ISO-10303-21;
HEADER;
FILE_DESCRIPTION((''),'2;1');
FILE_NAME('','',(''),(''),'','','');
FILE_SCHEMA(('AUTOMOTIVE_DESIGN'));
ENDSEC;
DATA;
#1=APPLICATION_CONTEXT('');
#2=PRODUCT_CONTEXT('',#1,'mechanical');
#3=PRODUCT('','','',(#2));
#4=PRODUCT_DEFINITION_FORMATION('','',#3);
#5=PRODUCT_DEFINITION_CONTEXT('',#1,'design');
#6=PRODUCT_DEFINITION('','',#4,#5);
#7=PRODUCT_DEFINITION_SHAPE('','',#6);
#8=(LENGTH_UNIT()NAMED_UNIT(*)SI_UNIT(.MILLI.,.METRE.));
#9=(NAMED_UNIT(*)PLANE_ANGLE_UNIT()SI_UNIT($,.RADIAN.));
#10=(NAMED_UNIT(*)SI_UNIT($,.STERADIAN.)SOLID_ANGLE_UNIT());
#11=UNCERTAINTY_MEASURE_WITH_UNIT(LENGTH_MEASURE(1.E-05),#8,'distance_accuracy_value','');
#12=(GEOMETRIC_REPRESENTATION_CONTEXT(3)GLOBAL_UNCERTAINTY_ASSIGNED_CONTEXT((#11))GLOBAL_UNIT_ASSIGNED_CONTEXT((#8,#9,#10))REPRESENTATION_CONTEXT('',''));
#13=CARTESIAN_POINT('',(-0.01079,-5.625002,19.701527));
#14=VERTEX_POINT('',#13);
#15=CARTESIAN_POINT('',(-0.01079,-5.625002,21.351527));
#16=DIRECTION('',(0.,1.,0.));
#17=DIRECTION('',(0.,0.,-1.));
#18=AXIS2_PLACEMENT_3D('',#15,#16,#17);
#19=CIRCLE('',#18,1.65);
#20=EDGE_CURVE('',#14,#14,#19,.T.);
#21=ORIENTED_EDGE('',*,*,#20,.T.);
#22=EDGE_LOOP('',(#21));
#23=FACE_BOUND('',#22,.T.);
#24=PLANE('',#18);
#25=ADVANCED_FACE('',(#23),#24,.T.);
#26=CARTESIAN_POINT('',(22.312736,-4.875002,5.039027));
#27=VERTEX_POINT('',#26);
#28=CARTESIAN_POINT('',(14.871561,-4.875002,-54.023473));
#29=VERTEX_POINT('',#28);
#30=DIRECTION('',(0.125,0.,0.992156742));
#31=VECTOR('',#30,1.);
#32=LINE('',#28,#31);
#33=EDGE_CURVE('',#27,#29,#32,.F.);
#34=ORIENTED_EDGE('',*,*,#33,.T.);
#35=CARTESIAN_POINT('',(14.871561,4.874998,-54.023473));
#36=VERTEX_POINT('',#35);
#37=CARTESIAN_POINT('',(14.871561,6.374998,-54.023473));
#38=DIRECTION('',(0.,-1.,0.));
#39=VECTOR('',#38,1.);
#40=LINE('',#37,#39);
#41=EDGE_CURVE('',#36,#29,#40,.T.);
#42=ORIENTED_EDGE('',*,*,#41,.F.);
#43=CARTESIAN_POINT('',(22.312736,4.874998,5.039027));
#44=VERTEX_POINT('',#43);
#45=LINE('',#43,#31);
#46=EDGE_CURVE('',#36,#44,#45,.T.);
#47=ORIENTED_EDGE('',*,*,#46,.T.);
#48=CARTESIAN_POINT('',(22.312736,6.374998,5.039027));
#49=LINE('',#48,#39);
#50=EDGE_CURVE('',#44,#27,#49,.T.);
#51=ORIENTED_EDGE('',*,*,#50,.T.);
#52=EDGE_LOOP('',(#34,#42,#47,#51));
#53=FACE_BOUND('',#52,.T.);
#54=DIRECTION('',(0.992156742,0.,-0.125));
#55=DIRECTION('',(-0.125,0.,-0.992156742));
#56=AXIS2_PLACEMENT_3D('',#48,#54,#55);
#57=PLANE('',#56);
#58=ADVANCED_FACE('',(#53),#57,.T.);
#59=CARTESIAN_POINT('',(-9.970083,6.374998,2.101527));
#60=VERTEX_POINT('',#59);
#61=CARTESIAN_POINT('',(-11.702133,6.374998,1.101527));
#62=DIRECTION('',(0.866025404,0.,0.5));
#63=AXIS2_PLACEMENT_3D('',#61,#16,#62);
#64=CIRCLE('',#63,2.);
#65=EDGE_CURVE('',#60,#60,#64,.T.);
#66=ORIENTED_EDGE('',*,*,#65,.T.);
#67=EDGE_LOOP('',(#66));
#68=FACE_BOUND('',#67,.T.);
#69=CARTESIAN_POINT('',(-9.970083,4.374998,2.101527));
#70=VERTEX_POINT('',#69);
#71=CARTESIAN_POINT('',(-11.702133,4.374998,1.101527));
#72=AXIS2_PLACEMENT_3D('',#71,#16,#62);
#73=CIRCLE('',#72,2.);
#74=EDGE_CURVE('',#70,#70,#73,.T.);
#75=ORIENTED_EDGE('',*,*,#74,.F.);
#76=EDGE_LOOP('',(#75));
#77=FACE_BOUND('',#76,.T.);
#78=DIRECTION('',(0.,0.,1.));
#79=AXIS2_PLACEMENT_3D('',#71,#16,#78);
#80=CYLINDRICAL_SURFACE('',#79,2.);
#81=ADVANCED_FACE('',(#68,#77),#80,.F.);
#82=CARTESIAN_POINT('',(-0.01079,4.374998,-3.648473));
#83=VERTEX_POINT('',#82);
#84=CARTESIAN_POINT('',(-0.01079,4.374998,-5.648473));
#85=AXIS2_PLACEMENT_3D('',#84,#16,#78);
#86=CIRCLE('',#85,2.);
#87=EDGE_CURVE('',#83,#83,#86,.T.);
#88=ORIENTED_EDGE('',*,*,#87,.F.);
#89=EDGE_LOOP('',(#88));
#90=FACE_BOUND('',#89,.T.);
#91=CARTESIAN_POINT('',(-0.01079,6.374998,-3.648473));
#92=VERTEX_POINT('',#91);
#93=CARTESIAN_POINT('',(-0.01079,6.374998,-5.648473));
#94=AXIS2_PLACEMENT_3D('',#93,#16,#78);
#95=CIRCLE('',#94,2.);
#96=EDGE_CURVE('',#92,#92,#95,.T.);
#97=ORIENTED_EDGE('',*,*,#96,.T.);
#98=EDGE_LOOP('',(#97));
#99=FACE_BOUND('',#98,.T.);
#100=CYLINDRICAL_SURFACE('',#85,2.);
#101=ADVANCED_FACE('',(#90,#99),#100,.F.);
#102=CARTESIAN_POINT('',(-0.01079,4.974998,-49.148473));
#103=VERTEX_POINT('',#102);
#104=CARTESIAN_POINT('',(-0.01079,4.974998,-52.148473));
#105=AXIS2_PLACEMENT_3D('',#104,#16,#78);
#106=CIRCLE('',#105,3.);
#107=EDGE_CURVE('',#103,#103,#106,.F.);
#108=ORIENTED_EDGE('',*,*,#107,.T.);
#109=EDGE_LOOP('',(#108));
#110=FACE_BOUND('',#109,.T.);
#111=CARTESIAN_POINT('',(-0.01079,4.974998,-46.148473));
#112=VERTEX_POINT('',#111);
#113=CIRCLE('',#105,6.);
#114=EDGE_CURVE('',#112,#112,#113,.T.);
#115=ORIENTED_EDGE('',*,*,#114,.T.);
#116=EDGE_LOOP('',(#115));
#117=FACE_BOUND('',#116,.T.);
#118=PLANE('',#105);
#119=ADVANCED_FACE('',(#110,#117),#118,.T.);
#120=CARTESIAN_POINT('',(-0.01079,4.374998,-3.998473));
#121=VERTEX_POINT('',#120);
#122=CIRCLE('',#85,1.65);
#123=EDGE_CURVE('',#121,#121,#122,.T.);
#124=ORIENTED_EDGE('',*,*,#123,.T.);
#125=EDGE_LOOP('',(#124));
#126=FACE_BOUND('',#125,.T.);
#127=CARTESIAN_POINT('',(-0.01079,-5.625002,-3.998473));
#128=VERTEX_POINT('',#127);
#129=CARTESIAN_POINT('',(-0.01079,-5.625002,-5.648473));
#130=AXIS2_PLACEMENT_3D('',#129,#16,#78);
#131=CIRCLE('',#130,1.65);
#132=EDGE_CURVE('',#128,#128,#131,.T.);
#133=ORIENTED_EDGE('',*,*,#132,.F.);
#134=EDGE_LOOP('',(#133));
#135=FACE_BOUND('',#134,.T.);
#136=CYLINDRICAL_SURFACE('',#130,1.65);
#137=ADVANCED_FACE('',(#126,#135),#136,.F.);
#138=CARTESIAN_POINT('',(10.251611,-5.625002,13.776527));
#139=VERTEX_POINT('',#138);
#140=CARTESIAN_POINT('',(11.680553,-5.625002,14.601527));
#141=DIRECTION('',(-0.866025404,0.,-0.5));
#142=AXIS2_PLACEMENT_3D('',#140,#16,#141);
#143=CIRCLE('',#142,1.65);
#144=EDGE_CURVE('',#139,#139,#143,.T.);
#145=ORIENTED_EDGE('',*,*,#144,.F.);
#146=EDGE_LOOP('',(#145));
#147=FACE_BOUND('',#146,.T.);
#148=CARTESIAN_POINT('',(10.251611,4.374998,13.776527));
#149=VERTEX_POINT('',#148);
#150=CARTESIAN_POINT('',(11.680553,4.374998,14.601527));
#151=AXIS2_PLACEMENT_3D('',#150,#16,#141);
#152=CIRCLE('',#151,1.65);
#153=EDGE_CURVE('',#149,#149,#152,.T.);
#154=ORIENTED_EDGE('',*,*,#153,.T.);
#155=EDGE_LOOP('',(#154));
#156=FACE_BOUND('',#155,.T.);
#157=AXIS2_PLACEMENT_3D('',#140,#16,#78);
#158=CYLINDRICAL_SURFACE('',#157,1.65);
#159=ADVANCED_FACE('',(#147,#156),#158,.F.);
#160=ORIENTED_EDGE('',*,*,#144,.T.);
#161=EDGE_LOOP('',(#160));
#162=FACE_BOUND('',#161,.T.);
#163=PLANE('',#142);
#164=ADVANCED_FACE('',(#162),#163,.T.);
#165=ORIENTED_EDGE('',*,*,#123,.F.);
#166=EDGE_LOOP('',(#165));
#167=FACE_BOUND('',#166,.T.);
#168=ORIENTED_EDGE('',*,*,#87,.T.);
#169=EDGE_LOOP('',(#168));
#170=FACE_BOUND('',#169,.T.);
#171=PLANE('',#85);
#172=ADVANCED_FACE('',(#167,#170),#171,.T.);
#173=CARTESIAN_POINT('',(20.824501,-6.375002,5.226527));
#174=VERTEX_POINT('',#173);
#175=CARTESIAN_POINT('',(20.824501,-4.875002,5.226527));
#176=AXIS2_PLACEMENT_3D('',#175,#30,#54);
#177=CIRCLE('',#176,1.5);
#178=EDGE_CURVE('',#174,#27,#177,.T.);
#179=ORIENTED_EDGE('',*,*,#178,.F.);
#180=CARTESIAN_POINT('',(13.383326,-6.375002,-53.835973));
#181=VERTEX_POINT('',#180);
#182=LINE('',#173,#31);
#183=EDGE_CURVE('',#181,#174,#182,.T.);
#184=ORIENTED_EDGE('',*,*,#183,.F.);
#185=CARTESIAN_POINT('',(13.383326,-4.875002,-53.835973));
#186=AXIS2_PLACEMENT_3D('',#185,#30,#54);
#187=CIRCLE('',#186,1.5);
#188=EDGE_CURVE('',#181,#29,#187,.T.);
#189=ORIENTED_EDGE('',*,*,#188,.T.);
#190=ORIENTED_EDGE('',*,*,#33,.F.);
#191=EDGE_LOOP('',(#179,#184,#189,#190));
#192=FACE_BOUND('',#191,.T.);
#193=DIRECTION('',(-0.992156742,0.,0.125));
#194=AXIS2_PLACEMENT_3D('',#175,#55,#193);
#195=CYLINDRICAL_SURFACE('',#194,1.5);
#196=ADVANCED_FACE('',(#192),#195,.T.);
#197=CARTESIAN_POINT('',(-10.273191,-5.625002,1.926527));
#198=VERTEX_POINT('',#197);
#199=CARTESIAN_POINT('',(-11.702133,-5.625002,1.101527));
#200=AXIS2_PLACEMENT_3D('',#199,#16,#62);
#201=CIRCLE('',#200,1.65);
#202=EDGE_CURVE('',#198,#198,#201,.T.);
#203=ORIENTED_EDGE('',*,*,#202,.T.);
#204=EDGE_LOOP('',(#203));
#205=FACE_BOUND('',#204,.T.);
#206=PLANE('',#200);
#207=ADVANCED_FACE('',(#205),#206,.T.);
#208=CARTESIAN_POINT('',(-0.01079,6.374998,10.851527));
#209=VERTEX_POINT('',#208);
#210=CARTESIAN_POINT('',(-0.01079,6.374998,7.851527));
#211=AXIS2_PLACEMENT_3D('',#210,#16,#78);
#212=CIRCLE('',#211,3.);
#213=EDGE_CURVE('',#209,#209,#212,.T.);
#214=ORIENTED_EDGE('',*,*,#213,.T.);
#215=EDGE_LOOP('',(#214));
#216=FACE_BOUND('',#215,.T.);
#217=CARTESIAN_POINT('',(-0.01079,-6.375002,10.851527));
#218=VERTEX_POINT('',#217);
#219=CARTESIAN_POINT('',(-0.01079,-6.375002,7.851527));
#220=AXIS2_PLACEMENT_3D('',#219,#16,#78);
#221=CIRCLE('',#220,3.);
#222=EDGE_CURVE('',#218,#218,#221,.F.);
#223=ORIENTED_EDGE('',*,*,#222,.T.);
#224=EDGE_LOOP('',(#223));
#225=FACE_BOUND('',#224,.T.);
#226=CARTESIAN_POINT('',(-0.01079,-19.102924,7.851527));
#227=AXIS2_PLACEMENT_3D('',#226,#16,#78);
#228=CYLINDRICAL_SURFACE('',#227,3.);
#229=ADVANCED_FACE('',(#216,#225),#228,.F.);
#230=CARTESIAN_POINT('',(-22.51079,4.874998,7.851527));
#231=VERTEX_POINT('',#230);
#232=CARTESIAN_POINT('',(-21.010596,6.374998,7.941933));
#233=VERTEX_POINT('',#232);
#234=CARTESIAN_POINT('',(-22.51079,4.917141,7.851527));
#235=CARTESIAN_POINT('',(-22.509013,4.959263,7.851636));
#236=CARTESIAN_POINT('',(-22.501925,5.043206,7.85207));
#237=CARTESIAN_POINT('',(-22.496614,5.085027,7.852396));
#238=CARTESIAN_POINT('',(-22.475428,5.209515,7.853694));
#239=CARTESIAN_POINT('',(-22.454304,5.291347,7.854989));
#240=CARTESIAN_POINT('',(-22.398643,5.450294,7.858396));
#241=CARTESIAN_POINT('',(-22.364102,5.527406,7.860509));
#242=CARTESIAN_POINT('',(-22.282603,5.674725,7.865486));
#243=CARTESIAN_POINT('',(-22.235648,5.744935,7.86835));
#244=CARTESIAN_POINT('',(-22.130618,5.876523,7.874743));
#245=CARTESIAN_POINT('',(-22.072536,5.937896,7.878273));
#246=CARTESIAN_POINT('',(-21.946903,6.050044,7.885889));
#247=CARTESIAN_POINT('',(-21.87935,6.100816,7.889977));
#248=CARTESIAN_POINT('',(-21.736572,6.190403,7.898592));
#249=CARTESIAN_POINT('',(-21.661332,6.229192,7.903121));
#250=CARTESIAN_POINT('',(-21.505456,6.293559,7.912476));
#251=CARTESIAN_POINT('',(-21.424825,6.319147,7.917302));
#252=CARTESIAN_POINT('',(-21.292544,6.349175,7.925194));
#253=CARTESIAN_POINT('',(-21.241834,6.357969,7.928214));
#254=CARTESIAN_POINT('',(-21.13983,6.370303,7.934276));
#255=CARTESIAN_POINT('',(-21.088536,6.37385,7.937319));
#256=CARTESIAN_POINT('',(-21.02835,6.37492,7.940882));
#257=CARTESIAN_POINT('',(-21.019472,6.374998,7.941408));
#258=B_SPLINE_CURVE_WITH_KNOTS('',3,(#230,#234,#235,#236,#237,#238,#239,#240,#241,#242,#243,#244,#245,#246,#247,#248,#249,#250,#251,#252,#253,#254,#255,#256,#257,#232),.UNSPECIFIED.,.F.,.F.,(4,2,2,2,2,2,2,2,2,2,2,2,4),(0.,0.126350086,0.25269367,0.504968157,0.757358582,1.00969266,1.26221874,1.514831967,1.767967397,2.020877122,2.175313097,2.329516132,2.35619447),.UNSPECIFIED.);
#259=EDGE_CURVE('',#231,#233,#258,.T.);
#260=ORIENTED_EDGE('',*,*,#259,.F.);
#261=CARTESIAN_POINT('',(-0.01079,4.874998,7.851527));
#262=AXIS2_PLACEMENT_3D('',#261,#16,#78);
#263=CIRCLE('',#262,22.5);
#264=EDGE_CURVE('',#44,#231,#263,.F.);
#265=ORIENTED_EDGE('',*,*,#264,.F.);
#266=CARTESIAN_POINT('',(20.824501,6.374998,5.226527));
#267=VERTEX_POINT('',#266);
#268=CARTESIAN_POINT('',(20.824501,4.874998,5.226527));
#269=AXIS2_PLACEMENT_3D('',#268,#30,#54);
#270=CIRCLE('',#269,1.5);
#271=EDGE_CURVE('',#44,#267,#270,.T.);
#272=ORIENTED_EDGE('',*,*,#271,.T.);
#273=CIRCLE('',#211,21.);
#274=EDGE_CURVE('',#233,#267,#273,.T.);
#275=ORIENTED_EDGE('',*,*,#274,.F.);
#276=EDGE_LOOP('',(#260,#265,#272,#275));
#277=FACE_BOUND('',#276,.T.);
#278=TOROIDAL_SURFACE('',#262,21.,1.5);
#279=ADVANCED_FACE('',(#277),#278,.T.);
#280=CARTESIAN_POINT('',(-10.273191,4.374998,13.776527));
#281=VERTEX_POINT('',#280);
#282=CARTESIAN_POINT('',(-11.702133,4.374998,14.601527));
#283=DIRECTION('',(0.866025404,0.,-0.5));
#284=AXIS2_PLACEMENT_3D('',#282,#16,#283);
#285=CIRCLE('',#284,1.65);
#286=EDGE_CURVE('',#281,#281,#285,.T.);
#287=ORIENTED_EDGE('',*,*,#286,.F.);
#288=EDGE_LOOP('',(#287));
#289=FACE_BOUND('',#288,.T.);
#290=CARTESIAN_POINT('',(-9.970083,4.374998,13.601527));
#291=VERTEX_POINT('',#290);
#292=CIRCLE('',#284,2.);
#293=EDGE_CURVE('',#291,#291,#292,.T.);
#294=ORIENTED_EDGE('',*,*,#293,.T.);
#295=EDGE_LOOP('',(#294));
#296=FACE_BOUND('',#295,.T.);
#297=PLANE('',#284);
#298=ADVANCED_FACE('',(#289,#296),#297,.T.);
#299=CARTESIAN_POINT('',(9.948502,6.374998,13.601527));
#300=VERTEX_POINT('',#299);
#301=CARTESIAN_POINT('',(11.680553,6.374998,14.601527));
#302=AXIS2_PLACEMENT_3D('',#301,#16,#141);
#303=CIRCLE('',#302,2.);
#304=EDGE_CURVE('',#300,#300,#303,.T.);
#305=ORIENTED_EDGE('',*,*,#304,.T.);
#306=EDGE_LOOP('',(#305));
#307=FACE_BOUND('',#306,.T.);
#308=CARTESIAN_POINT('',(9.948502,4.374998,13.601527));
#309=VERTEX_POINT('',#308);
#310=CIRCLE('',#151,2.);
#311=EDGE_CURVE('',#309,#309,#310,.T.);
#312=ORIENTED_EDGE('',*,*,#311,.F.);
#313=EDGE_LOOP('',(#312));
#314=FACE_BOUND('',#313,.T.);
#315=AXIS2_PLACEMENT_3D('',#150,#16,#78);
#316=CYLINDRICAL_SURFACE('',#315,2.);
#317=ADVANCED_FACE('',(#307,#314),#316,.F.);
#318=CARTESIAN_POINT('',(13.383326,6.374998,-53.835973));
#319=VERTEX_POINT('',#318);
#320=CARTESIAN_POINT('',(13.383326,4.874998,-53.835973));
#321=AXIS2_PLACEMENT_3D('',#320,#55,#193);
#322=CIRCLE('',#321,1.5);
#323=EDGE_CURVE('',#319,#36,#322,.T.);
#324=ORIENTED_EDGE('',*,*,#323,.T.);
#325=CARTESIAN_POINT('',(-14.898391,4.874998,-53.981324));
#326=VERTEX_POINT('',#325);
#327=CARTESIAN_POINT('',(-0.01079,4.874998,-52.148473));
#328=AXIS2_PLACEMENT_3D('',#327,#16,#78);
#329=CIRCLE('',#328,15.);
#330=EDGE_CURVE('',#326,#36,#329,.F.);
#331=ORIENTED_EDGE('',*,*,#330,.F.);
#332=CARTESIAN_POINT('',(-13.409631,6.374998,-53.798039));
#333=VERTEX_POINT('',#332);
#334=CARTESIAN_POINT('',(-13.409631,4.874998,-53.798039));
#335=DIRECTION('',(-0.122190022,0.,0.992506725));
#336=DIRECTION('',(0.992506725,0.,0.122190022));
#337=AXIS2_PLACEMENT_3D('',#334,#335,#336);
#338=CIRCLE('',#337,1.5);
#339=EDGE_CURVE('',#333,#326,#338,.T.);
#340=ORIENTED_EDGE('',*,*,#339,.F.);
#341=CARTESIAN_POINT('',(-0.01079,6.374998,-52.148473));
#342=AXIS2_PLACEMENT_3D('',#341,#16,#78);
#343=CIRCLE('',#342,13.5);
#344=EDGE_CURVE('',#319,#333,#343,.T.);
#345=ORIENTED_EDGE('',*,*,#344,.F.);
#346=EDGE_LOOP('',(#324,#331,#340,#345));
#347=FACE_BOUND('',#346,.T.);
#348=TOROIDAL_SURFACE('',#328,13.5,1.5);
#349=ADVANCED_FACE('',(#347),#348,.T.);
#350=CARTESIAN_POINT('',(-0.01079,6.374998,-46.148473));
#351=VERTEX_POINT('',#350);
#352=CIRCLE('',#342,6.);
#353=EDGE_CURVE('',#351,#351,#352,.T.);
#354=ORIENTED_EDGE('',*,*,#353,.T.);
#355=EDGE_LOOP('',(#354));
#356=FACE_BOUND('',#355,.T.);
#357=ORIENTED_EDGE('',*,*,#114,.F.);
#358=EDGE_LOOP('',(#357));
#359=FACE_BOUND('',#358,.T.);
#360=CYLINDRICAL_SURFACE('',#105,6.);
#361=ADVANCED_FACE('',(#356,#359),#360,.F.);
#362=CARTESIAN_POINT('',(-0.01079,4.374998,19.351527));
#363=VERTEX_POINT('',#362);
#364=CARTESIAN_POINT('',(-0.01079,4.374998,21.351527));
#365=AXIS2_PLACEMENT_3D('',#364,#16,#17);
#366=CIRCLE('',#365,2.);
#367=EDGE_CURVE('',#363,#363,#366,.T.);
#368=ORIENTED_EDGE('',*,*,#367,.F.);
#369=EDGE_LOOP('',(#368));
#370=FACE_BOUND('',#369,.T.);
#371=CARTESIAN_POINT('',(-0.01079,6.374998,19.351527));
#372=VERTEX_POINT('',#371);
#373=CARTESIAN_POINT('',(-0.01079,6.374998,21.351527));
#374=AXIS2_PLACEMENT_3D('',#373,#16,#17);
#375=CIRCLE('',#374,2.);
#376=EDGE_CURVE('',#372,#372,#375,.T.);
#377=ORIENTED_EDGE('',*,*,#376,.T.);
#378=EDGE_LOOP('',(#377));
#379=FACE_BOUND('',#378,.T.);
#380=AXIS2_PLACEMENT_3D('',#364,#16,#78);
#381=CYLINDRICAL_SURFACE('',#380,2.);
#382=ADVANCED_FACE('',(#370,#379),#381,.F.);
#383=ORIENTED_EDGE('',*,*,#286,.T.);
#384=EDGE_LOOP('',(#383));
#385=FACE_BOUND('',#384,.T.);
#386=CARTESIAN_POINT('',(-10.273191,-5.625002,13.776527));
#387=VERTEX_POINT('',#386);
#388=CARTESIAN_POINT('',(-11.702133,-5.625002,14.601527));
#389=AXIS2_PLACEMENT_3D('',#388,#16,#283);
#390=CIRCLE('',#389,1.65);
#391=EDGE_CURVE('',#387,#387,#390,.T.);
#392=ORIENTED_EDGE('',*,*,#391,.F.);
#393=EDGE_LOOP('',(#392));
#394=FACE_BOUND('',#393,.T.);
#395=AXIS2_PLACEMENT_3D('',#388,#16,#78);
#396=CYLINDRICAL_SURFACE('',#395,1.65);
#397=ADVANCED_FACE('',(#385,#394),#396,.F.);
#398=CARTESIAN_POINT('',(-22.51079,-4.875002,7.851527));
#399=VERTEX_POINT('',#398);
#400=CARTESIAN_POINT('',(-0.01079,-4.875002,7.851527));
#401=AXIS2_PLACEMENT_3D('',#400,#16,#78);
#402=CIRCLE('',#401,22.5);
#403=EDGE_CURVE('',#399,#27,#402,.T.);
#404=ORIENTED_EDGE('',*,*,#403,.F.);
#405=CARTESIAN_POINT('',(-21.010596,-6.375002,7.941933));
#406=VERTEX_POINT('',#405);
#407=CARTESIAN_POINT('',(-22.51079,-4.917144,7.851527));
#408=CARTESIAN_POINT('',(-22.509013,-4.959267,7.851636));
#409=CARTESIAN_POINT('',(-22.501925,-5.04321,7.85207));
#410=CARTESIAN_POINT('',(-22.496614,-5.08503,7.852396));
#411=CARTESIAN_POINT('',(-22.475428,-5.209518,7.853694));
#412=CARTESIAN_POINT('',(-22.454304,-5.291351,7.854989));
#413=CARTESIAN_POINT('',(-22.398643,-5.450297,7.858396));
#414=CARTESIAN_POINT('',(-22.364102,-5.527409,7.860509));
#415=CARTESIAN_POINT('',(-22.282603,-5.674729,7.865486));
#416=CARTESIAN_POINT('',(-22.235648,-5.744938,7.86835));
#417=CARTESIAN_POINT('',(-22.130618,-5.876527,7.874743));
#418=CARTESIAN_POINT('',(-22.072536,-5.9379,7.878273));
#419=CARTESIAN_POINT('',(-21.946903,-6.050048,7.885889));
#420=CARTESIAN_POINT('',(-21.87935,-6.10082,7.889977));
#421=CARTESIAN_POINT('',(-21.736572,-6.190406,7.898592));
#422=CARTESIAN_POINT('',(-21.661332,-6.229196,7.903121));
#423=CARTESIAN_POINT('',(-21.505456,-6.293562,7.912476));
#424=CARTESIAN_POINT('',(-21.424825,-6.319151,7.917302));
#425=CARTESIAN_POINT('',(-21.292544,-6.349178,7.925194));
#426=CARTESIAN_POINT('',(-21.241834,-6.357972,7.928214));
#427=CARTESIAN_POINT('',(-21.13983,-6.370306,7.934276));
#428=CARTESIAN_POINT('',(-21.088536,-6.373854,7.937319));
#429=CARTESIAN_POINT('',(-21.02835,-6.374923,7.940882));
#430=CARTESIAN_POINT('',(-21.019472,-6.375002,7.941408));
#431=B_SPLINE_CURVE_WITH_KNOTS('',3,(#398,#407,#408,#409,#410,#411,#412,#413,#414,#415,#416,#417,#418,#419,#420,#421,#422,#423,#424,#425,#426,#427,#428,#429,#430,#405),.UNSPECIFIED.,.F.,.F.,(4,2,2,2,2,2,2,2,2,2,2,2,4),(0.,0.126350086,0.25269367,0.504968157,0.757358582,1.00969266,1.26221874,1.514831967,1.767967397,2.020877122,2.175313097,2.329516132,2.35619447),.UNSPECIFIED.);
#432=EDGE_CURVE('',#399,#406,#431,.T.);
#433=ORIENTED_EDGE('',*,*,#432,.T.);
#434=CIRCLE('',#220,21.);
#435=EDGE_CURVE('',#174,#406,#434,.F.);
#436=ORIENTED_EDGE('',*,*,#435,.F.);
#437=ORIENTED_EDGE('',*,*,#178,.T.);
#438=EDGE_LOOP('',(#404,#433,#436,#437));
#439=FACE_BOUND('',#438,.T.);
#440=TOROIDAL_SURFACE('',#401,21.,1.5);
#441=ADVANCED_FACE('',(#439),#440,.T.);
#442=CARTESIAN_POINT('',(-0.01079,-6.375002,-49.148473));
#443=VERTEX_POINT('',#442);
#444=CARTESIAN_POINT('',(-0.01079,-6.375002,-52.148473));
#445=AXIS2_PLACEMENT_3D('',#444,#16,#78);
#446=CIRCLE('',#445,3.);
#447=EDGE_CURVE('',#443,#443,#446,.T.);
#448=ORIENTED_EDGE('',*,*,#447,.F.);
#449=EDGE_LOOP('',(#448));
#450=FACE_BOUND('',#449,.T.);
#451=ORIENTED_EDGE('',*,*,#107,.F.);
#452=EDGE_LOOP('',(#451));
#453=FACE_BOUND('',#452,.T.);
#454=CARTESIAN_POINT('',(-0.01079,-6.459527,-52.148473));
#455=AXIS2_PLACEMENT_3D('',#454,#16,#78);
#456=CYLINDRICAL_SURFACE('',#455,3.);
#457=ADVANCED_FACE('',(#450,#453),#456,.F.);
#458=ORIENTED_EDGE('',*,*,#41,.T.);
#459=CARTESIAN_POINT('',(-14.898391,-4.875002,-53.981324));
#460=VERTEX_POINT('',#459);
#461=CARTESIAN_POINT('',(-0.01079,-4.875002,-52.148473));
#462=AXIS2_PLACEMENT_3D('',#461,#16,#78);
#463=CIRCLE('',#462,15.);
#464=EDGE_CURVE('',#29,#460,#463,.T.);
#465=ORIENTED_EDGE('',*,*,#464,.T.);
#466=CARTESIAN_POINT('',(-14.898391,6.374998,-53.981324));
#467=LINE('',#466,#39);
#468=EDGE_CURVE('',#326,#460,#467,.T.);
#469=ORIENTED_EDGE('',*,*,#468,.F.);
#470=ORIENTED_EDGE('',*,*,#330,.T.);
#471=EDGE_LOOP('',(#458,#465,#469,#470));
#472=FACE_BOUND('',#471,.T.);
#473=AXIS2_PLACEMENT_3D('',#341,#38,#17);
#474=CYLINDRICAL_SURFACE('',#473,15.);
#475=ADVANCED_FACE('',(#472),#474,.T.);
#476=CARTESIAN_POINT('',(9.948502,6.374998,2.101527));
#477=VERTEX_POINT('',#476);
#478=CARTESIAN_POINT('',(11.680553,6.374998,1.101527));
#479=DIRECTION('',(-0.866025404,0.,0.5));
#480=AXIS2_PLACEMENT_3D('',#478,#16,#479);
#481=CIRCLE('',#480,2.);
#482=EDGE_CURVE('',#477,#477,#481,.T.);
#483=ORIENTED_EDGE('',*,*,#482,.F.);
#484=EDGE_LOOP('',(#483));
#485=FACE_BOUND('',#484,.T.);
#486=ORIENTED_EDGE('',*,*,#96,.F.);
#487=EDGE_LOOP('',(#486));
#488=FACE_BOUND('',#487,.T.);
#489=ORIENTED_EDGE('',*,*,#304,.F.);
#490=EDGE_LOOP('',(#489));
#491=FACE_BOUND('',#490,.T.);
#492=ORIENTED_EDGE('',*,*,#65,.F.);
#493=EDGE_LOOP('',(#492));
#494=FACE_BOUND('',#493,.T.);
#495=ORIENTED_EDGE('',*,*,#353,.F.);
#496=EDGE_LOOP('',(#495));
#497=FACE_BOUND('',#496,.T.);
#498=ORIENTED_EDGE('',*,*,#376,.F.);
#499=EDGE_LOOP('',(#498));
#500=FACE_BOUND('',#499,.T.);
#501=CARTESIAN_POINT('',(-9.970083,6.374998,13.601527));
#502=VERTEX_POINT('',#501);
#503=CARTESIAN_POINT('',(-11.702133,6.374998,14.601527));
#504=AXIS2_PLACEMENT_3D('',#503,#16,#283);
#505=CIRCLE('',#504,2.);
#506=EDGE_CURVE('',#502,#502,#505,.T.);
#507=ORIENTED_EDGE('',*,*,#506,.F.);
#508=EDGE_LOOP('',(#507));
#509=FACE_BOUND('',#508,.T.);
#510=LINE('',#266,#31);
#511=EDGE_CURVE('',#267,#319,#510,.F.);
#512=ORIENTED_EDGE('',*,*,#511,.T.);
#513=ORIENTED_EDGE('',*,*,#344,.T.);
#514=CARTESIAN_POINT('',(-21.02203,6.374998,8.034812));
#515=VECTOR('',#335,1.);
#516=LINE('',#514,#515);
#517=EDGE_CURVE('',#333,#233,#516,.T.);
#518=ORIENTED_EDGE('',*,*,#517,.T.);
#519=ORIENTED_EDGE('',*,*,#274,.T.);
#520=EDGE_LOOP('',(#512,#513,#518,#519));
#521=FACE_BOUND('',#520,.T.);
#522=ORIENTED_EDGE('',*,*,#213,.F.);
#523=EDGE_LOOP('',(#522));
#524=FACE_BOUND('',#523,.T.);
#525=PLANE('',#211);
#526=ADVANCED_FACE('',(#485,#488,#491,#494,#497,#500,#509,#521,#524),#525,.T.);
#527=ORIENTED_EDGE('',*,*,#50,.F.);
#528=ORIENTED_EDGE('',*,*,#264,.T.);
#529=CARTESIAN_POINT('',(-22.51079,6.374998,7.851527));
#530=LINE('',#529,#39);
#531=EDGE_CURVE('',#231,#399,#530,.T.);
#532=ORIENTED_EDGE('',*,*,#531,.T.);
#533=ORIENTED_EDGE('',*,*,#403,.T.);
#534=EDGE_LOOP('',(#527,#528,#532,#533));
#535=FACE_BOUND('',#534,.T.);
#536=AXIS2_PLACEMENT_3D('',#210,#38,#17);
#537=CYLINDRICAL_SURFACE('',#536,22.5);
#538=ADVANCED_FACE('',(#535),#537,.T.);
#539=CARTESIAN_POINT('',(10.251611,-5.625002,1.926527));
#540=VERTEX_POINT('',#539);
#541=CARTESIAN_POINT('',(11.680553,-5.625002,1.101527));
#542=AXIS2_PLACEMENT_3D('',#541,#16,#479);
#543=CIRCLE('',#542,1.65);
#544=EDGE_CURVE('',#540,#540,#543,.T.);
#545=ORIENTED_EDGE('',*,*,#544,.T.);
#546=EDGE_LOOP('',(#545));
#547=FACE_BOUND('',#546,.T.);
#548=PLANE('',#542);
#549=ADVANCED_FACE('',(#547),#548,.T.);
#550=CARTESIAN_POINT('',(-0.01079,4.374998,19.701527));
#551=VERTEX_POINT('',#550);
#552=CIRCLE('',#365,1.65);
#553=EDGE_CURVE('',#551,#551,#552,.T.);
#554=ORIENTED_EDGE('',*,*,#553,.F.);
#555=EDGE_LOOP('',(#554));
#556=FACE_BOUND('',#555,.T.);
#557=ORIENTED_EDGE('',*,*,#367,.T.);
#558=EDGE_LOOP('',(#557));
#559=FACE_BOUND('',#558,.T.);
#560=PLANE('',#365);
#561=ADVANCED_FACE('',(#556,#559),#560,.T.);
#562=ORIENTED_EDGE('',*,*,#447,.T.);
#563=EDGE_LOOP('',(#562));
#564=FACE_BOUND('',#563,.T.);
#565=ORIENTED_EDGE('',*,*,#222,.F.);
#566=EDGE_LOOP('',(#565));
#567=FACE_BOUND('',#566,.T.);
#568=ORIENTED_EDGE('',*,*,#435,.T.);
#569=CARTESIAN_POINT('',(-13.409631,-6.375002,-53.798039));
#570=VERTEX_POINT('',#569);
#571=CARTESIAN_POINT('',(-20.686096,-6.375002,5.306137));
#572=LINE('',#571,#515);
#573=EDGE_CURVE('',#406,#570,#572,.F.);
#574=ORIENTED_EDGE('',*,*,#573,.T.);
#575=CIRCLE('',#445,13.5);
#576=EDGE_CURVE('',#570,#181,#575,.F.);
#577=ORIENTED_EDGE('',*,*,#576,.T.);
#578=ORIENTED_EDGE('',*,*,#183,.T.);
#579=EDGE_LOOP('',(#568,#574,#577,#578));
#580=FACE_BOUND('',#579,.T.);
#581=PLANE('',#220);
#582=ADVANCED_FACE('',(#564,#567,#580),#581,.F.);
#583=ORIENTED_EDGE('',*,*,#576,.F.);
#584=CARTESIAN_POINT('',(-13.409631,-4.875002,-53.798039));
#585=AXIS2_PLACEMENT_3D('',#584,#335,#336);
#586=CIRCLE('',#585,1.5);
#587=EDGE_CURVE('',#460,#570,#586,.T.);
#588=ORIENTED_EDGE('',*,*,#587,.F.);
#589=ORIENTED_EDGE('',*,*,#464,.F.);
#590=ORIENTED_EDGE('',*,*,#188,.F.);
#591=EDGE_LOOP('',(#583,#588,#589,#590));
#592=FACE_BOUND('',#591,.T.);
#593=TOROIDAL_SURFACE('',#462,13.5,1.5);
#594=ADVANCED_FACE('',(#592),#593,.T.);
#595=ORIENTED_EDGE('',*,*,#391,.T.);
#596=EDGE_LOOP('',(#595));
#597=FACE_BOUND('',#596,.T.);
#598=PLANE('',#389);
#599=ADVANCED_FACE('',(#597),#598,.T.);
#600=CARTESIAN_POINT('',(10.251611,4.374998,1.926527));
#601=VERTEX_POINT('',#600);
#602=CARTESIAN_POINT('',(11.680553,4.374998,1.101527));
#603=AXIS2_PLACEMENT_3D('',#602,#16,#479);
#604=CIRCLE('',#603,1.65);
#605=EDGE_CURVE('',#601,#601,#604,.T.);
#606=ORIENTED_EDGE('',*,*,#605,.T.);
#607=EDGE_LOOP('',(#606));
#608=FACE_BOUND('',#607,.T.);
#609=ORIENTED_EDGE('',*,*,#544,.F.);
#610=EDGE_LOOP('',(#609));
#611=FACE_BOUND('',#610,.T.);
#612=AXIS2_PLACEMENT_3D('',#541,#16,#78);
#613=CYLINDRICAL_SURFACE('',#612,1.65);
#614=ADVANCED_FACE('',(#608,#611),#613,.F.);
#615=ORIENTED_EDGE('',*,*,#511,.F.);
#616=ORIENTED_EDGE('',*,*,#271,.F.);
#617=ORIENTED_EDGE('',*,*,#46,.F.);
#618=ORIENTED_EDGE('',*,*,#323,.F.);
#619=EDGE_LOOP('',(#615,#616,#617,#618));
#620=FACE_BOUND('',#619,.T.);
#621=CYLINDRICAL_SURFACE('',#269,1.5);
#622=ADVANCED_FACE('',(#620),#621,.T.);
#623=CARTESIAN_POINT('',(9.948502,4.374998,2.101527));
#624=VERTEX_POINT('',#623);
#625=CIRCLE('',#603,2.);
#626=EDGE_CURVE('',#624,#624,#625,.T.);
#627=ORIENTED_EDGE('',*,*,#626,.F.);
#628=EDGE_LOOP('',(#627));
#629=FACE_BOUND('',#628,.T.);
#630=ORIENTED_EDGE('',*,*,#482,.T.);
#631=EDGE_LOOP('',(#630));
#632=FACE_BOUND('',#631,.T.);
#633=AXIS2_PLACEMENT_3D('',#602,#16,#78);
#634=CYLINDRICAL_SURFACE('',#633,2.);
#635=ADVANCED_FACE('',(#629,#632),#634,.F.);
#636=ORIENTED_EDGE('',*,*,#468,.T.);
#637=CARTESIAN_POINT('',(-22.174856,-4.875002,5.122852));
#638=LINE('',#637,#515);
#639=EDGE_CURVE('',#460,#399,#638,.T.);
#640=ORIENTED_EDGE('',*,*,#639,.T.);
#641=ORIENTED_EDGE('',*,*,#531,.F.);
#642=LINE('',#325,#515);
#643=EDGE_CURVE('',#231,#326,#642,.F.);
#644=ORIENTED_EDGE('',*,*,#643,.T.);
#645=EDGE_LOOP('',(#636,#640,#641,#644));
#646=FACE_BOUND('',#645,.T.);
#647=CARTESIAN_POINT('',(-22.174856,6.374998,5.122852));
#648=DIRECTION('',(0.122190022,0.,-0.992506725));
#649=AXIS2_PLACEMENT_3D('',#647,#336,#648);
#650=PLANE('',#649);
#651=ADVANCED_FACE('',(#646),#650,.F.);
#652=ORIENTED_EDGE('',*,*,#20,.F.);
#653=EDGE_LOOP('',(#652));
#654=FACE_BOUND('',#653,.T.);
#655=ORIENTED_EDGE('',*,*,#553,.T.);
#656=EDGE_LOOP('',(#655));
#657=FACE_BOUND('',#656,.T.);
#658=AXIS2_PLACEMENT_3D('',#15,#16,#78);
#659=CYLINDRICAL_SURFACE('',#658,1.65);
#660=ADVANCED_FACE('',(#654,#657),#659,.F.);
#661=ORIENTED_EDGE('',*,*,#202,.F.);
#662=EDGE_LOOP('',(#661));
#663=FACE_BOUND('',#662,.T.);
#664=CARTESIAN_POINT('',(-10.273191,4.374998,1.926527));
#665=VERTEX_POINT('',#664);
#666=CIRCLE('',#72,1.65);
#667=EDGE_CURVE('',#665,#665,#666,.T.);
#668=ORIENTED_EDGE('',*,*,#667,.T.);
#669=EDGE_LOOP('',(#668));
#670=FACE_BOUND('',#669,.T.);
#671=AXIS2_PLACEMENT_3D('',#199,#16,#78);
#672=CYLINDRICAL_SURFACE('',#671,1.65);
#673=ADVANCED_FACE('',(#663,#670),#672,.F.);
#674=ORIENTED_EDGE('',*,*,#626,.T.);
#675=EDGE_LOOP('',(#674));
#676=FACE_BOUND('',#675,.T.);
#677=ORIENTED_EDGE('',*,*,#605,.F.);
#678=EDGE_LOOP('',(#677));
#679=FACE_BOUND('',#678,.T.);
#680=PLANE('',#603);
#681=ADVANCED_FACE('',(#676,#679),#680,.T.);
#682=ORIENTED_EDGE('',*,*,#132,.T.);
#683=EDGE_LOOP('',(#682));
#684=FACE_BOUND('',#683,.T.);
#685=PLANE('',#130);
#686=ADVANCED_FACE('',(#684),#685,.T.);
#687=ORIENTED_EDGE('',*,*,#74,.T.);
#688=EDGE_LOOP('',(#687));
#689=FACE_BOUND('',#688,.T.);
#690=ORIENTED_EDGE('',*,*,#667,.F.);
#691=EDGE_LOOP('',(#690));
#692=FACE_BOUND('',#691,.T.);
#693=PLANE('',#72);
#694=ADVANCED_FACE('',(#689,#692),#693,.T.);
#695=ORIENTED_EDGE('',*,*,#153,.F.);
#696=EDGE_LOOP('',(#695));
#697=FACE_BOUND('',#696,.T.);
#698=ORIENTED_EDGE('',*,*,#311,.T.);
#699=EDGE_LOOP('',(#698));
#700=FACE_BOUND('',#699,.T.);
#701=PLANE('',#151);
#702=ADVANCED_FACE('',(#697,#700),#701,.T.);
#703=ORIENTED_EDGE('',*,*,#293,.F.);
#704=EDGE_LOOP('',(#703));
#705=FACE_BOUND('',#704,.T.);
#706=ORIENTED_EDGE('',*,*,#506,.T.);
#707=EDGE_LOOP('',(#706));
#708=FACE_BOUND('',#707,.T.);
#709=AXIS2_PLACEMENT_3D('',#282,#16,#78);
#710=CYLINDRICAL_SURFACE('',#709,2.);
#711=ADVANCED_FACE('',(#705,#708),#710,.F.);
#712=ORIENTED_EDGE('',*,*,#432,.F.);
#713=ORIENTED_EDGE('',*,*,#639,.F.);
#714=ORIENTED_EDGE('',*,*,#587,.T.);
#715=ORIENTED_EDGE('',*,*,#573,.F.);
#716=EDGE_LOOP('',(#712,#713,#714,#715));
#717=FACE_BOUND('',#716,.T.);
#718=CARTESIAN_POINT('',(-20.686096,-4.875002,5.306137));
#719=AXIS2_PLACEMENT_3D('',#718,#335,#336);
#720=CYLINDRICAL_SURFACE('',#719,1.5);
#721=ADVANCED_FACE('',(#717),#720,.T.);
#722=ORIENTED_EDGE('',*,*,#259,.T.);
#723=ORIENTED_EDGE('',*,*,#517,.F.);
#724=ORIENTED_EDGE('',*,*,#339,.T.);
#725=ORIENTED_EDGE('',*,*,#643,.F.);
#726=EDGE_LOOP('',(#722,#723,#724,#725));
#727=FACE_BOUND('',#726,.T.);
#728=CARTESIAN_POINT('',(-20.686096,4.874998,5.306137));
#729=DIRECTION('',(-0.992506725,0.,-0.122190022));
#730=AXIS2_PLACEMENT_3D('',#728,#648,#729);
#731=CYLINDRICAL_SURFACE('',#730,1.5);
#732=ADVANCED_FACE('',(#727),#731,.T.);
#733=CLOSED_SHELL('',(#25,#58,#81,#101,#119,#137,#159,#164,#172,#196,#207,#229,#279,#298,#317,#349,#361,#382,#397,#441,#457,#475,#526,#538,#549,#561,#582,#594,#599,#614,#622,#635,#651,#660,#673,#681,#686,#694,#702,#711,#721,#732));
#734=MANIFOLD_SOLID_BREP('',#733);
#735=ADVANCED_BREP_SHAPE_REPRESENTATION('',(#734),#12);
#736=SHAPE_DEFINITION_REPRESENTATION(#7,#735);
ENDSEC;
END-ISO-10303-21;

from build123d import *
from OCP.BRepAlgoAPI import BRepAlgoAPI_Cut
from OCP.TopTools import TopTools_ListOfShape

# Parameters (mm, degrees)
EXTRUDE_1_DEPTH                = 4.25
HOLE_WIZARD_M2_1_D             = 1.6
FILLET_1_R                     = 1
SKETCH_5_R                     = 2
CUT_EXTRUDE_1_DEPTH            = 53.889034825
SKETCH_6_R                     = 3
CUT_EXTRUDE_2_DEPTH            = 53.889034825
SCALE_1_SCALE                  = 1.5
SKETCH_7_R                     = 2
CUT_EXTRUDE_3_DEPTH            = 2
PATTERN_START                  = 4.374998274
PATTERN_CIRCULAR_1_OUTLINE_R   = 2
PATTERN_CIRCULAR_1_OUTLINE_R_2 = 1.2
PATTERN_CIRCULAR_1_DEPTH       = 2
SKETCH_10_R                    = 1.65
CUT_EXTRUDE_4_DEPTH            = 10
PATTERN_START_2                = -5.625001726
PATTERN_CIRCULAR_2_OUTLINE_R   = 1.65
PATTERN_CIRCULAR_2_OUTLINE_R_2 = 1.2
PATTERN_CIRCULAR_2_DEPTH       = 10
SKETCH_11_R                    = 1.2
EXTRUDE_2_DEPTH                = 0.75
PATTERN_START_3                = -6.375001726
PATTERN_CIRCULAR_3_OUTLINE_R   = 1.2
PATTERN_CIRCULAR_3_DEPTH       = 0.75
SKETCH_12_R                    = 4.5
SKETCH_12_R_2                  = 3
EXTRUDE_3_DEPTH                = 12.75
CUT_EXTRUDE_START              = -12.75
SKETCH_14_R                    = 6
CUT_EXTRUDE_6_DEPTH            = 1.4


with BuildPart() as part:
    # 草图1 → 凸台-拉伸1 (new, symmetric)
    with BuildSketch(Plane(origin=(0, 0, 0), x_dir=(1, 0, 0), z_dir=(0, 1, 0))):
        with BuildLine():
            ThreePointArc((9.921567416, 41.25), (-0.014158448, 49.999989977), (-9.925067247, 41.221900218))
            Line((-9.925067247, 41.221900218), (-14.552087957, 3.638232549))
            Line((-14.552087957, 3.638232549), (-15, 0))
            ThreePointArc((-15, 0), (0.939343688, -14.970558889), (14.882351125, 1.875))
            Line((14.882351125, 1.875), (9.921567416, 41.25))
        make_face()
    extrude(amount=EXTRUDE_1_DEPTH, both=True)

    # M2 螺纹孔1 (through all)
    with Locations(Plane(origin=(0, 4.25, 0), x_dir=(1, 0, 0), z_dir=(0, 1, 0))):
        with Locations((0, 9), (7.794228634, 4.5), (7.794228634, -4.5), (0, -9), (-7.794228634, -4.5), (-7.794228634, 4.5)):
            Hole(HOLE_WIZARD_M2_1_D / 2)

    # 圆角1
    # the kernel refuses this fillet: 1 mm, written as the material it takes off along each edge
    with BuildSketch(Plane(origin=(0, 4.25, -40), x_dir=(0.9921567416492214, 0, -0.1250000000000007), z_dir=(0.1250000000000007, 0, 0.9921567416492214))) as fillet_1_piece_1:
        with BuildLine():
            CenterArc((10 - FILLET_1_R, -FILLET_1_R), FILLET_1_R, 0, 90)
            Line((10 - FILLET_1_R, 0), (10, 0))
            Line((10, 0), (10, -FILLET_1_R))
        make_face()
    revolve(axis=Axis((0, 4.25, -40), (0, 1, 0)), revolution_arc=165.800732353, mode=Mode.SUBTRACT)
    with BuildSketch(Plane(origin=(-15.519307592, 4.25, 4.21815358), x_dir=(0.9925067247033508, 0, 0.1221900217637565), z_dir=(0.12219002176375648, 0, -0.9925067247033507))) as fillet_1_piece_2:
        with BuildLine():
            CenterArc((FILLET_1_R, FILLET_1_R), FILLET_1_R, 180, 90)
            Line((0, FILLET_1_R), (0, 0))
            Line((0, 0), (FILLET_1_R, 0))
        make_face()
    extrude(amount=45.783119315, mode=Mode.SUBTRACT)
    with BuildSketch(Plane(origin=(0, 4.25, 0), x_dir=(-0.9860951018491775, 0, -0.16618197889380262), z_dir=(0.16618197889380262, 0, -0.9860951018491775))) as fillet_1_piece_3:
        with BuildLine():
            CenterArc((15 - FILLET_1_R, -FILLET_1_R), FILLET_1_R, 0, 90)
            Line((15, -FILLET_1_R), (15, 0))
            Line((15, 0), (15 - FILLET_1_R, 0))
        make_face()
    revolve(axis=Axis((0, 4.25, 0), (0, 1, 0)), revolution_arc=196.746660685, mode=Mode.SUBTRACT)
    with BuildSketch(Plane(origin=(0, -4.25, 0), x_dir=(-0.9860951018491775, 0, -0.16618197889380262), z_dir=(0.16618197889380262, 0, -0.9860951018491775))) as fillet_1_piece_4:
        with BuildLine():
            CenterArc((15 - FILLET_1_R, FILLET_1_R), FILLET_1_R, 270, 90)
            Line((15, FILLET_1_R), (15, 0))
            Line((15, 0), (15 - FILLET_1_R, 0))
        make_face()
    revolve(axis=Axis((0, -4.25, 0), (0, 1, 0)), revolution_arc=196.746660685, mode=Mode.SUBTRACT)
    with BuildSketch(Plane(origin=(14.882351125, 4.25, -1.875), x_dir=(0, -1, 0), z_dir=(-0.12499999999999992, 0, -0.9921567416492215))) as fillet_1_piece_5:
        with BuildLine():
            CenterArc((FILLET_1_R, FILLET_1_R), FILLET_1_R, 180, 90)
            Line((0, FILLET_1_R), (0, 0))
            Line((0, 0), (FILLET_1_R, 0))
        make_face()
    extrude(amount=39.686269666, mode=Mode.SUBTRACT)
    with BuildSketch(Plane(origin=(-15.519307592, -4.25, 4.21815358), x_dir=(0.9925067247033508, 0, 0.1221900217637565), z_dir=(0.12219002176375648, 0, -0.9925067247033507))) as fillet_1_piece_6:
        with BuildLine():
            CenterArc((FILLET_1_R, -FILLET_1_R), FILLET_1_R, 90, 90)
            Line((0, -FILLET_1_R), (0, 0))
            Line((0, 0), (FILLET_1_R, 0))
        make_face()
    extrude(amount=45.783119315, mode=Mode.SUBTRACT)
    with BuildSketch(Plane(origin=(0, -4.25, -40), x_dir=(0.9921567416492214, 0, -0.1250000000000007), z_dir=(0.1250000000000007, 0, 0.9921567416492214))) as fillet_1_piece_7:
        with BuildLine():
            CenterArc((10 - FILLET_1_R, FILLET_1_R), FILLET_1_R, 270, 90)
            Line((10, FILLET_1_R), (10, 0))
            Line((10, 0), (10 - FILLET_1_R, 0))
        make_face()
    revolve(axis=Axis((0, -4.25, -40), (0, 1, 0)), revolution_arc=165.800732353, mode=Mode.SUBTRACT)
    with BuildSketch(Plane(origin=(14.882351125, -4.25, -1.875), x_dir=(0, 1, 0), z_dir=(-0.12499999999999992, 0, -0.9921567416492215))) as fillet_1_piece_8:
        with BuildLine():
            CenterArc((FILLET_1_R, -FILLET_1_R), FILLET_1_R, 90, 90)
            Line((0, -FILLET_1_R), (0, 0))
            Line((0, 0), (FILLET_1_R, 0))
        make_face()
    extrude(amount=39.686269666, mode=Mode.SUBTRACT)

    # 草图5 → 切除-拉伸1 (cut, through all)
    with BuildSketch(Plane(origin=(0, 4.25, 0), x_dir=(1, 0, 0), z_dir=(0, 1, 0))):
        with Locations(Location((0, 40, 0), (0, 0, 270))):
            Circle(SKETCH_5_R)
    extrude(amount=-CUT_EXTRUDE_1_DEPTH, mode=Mode.SUBTRACT)

    # 草图6 → 切除-拉伸2 (cut, through all)
    with BuildSketch(Plane(origin=(0, 4.25, 0), x_dir=(1, 0, 0), z_dir=(0, 1, 0))):
        with Locations(Location((0, 0, 0), (0, 0, 270))):
            Circle(SKETCH_6_R)
    extrude(amount=-CUT_EXTRUDE_2_DEPTH, mode=Mode.SUBTRACT)


with BuildPart() as part_1:
    # 缩放比例1: scaled about (0.021575212, 0, -15.703057272)
    add(part.part.scale(SCALE_1_SCALE).moved(Location((-0.010787606, 0, 7.851528636))))


with BuildPart() as cut_extrude_3_tool:
    # 草图7 → 切除-拉伸3 (new body)
    with BuildSketch(Plane(origin=(0, 6.374998274, 0), x_dir=(1, 0, 0), z_dir=(0, 1, 0))):
        with Locations(Location((-0.010790425, 5.648473397, 0), (0, 0, 270))):
            Circle(SKETCH_7_R)
    extrude(amount=-CUT_EXTRUDE_3_DEPTH)


with BuildPart() as part_2:
    add(part_1.part)

    # 切除-拉伸3: cut by cut_extrude_3_tool, with a tolerance
    cut_extrude_3_stock = TopTools_ListOfShape()
    cut_extrude_3_stock.Append(part_2.part.wrapped)
    cut_extrude_3_tools = TopTools_ListOfShape()
    cut_extrude_3_tools.Append(cut_extrude_3_tool.part.wrapped)
    cut_extrude_3_cut = BRepAlgoAPI_Cut()
    cut_extrude_3_cut.SetArguments(cut_extrude_3_stock)
    cut_extrude_3_cut.SetTools(cut_extrude_3_tools)
    cut_extrude_3_cut.SetFuzzyValue(0.00001)
    cut_extrude_3_cut.Build()
    add(Compound.cast(cut_extrude_3_cut.Shape()).solids(), mode=Mode.REPLACE)


with BuildPart() as pattern_circular_1_tool:
    # 阵列(圆周)1: read off the stored shape, not the designer's step
    # 阵列(圆周)1 outline → 阵列(圆周)1 (new body)
    # profile 1 of 5: a face of its own
    with BuildSketch(Plane(origin=(0, 0, 0), x_dir=(1, 0, 0), z_dir=(0, 1, 0)).offset(PATTERN_START)):
        with Locations((11.680552526, -1.101526603)):
            Circle(PATTERN_CIRCULAR_1_OUTLINE_R)
        with Locations((11.680552526, -1.101526603)):
            Circle(PATTERN_CIRCULAR_1_OUTLINE_R_2, mode=Mode.SUBTRACT)
    # profile 2 of 5: a face of its own
    with BuildSketch(Plane(origin=(0, 0, 0), x_dir=(1, 0, 0), z_dir=(0, 1, 0)).offset(PATTERN_START)):
        with Locations((11.680552526, -14.601526603)):
            Circle(PATTERN_CIRCULAR_1_OUTLINE_R)
        with Locations((11.680552526, -14.601526603)):
            Circle(PATTERN_CIRCULAR_1_OUTLINE_R_2, mode=Mode.SUBTRACT)
    # profile 3 of 5: a face of its own
    with BuildSketch(Plane(origin=(0, 0, 0), x_dir=(1, 0, 0), z_dir=(0, 1, 0)).offset(PATTERN_START)):
        with Locations((-0.010790425, -21.351526603)):
            Circle(PATTERN_CIRCULAR_1_OUTLINE_R)
        with Locations((-0.010790425, -21.351526603)):
            Circle(PATTERN_CIRCULAR_1_OUTLINE_R_2, mode=Mode.SUBTRACT)
    # profile 4 of 5: a face of its own
    with BuildSketch(Plane(origin=(0, 0, 0), x_dir=(1, 0, 0), z_dir=(0, 1, 0)).offset(PATTERN_START)):
        with Locations((-11.702133376, -14.601526603)):
            Circle(PATTERN_CIRCULAR_1_OUTLINE_R)
        with Locations((-11.702133376, -14.601526603)):
            Circle(PATTERN_CIRCULAR_1_OUTLINE_R_2, mode=Mode.SUBTRACT)
    # profile 5 of 5: a face of its own
    with BuildSketch(Plane(origin=(0, 0, 0), x_dir=(1, 0, 0), z_dir=(0, 1, 0)).offset(PATTERN_START)):
        with Locations((-11.702133376, -1.101526603)):
            Circle(PATTERN_CIRCULAR_1_OUTLINE_R)
        with Locations((-11.702133376, -1.101526603)):
            Circle(PATTERN_CIRCULAR_1_OUTLINE_R_2, mode=Mode.SUBTRACT)
    extrude(amount=PATTERN_CIRCULAR_1_DEPTH)


with BuildPart() as part_3:
    add(part_2.part)

    # 阵列(圆周)1: cut by pattern_circular_1_tool, with a tolerance
    pattern_circular_1_stock = TopTools_ListOfShape()
    pattern_circular_1_stock.Append(part_3.part.wrapped)
    pattern_circular_1_tools = TopTools_ListOfShape()
    pattern_circular_1_tools.Append(pattern_circular_1_tool.part.wrapped)
    pattern_circular_1_cut = BRepAlgoAPI_Cut()
    pattern_circular_1_cut.SetArguments(pattern_circular_1_stock)
    pattern_circular_1_cut.SetTools(pattern_circular_1_tools)
    pattern_circular_1_cut.SetFuzzyValue(0.00001)
    pattern_circular_1_cut.Build()
    add(Compound.cast(pattern_circular_1_cut.Shape()).solids(), mode=Mode.REPLACE)

    # 草图10 → 切除-拉伸4 (cut)
    with BuildSketch(Plane(origin=(0, 4.374998274, 0), x_dir=(1, 0, 0), z_dir=(0, 1, 0))):
        with Locations(Location((-0.010790425, 5.648473397, 0), (0, 0, 270))):
            Circle(SKETCH_10_R)
    extrude(amount=-CUT_EXTRUDE_4_DEPTH, mode=Mode.SUBTRACT)


with BuildPart() as pattern_circular_2_tool:
    # 阵列(圆周)2: read off the stored shape, not the designer's step
    # 阵列(圆周)2 outline → 阵列(圆周)2 (new body)
    # profile 1 of 5: a face of its own
    with BuildSketch(Plane(origin=(0, 0, 0), x_dir=(1, 0, 0), z_dir=(0, 1, 0)).offset(PATTERN_START_2)):
        with Locations((-11.702133376, -1.101526603)):
            Circle(PATTERN_CIRCULAR_2_OUTLINE_R)
        with Locations((-11.702133376, -1.101526603)):
            Circle(PATTERN_CIRCULAR_2_OUTLINE_R_2, mode=Mode.SUBTRACT)
    # profile 2 of 5: a face of its own
    with BuildSketch(Plane(origin=(0, 0, 0), x_dir=(1, 0, 0), z_dir=(0, 1, 0)).offset(PATTERN_START_2)):
        with Locations((-11.702133376, -14.601526603)):
            Circle(PATTERN_CIRCULAR_2_OUTLINE_R)
        with Locations((-11.702133376, -14.601526603)):
            Circle(PATTERN_CIRCULAR_2_OUTLINE_R_2, mode=Mode.SUBTRACT)
    # profile 3 of 5: a face of its own
    with BuildSketch(Plane(origin=(0, 0, 0), x_dir=(1, 0, 0), z_dir=(0, 1, 0)).offset(PATTERN_START_2)):
        with Locations((-0.010790425, -21.351526603)):
            Circle(PATTERN_CIRCULAR_2_OUTLINE_R)
        with Locations((-0.010790425, -21.351526603)):
            Circle(PATTERN_CIRCULAR_2_OUTLINE_R_2, mode=Mode.SUBTRACT)
    # profile 4 of 5: a face of its own
    with BuildSketch(Plane(origin=(0, 0, 0), x_dir=(1, 0, 0), z_dir=(0, 1, 0)).offset(PATTERN_START_2)):
        with Locations((11.680552526, -14.601526603)):
            Circle(PATTERN_CIRCULAR_2_OUTLINE_R)
        with Locations((11.680552526, -14.601526603)):
            Circle(PATTERN_CIRCULAR_2_OUTLINE_R_2, mode=Mode.SUBTRACT)
    # profile 5 of 5: a face of its own
    with BuildSketch(Plane(origin=(0, 0, 0), x_dir=(1, 0, 0), z_dir=(0, 1, 0)).offset(PATTERN_START_2)):
        with Locations((11.680552526, -1.101526603)):
            Circle(PATTERN_CIRCULAR_2_OUTLINE_R)
        with Locations((11.680552526, -1.101526603)):
            Circle(PATTERN_CIRCULAR_2_OUTLINE_R_2, mode=Mode.SUBTRACT)
    extrude(amount=PATTERN_CIRCULAR_2_DEPTH)


with BuildPart() as part_4:
    add(part_3.part)

    # 阵列(圆周)2: cut by pattern_circular_2_tool, with a tolerance
    pattern_circular_2_stock = TopTools_ListOfShape()
    pattern_circular_2_stock.Append(part_4.part.wrapped)
    pattern_circular_2_tools = TopTools_ListOfShape()
    pattern_circular_2_tools.Append(pattern_circular_2_tool.part.wrapped)
    pattern_circular_2_cut = BRepAlgoAPI_Cut()
    pattern_circular_2_cut.SetArguments(pattern_circular_2_stock)
    pattern_circular_2_cut.SetTools(pattern_circular_2_tools)
    pattern_circular_2_cut.SetFuzzyValue(0.00001)
    pattern_circular_2_cut.Build()
    add(Compound.cast(pattern_circular_2_cut.Shape()).solids(), mode=Mode.REPLACE)


with BuildPart() as extrude_2_tool:
    # 草图11 → 凸台-拉伸2 (new body)
    with BuildSketch(Plane.XZ.offset(6.375001726)):
        with Locations((-0.010790425, 21.351526603)):
            Circle(SKETCH_11_R)
    extrude(amount=-EXTRUDE_2_DEPTH)


with BuildPart() as part_5:
    add(part_4.part)


with BuildPart() as part_6:
    # 凸台-拉伸2: joined with extrude_2_tool
    add(part_5.part.fuse(extrude_2_tool.part, tol=0.00001))


with BuildPart() as pattern_circular_3_tool:
    # 阵列(圆周)3: read off the stored shape, not the designer's step
    # 阵列(圆周)3 outline → 阵列(圆周)3 (new body)
    with BuildSketch(Plane(origin=(0, 0, 0), x_dir=(1, 0, 0), z_dir=(0, 1, 0)).offset(PATTERN_START_3)):
        with Locations((-11.702133376, -1.101526603)):
            Circle(PATTERN_CIRCULAR_3_OUTLINE_R)
        with Locations((-11.702133376, -14.601526603)):
            Circle(PATTERN_CIRCULAR_3_OUTLINE_R)
        with Locations((11.680552526, -14.601526603)):
            Circle(PATTERN_CIRCULAR_3_OUTLINE_R)
        with Locations((11.680552526, -1.101526603)):
            Circle(PATTERN_CIRCULAR_3_OUTLINE_R)
        with Locations((-0.010790425, 5.648473397)):
            Circle(PATTERN_CIRCULAR_3_OUTLINE_R)
    extrude(amount=PATTERN_CIRCULAR_3_DEPTH)


with BuildPart() as part_7:
    add(part_6.part)


with BuildPart() as part_8:
    # 阵列(圆周)3: joined with pattern_circular_3_tool
    add(part_7.part.fuse(pattern_circular_3_tool.part, tol=0.00001))


with BuildPart() as extrude_3_tool:
    # 草图12 → 凸台-拉伸3 (new body)
    with BuildSketch(Plane(origin=(0, 6.374998274, 0), x_dir=(1, 0, 0), z_dir=(0, 1, 0))):
        with Locations((-0.010790425, -7.851526603)):
            Circle(SKETCH_12_R)
        with Locations(Location((-0.010790425, -7.851526603, 0), (0, 0, 270))):
            Circle(SKETCH_12_R_2, mode=Mode.SUBTRACT)
    extrude(amount=-EXTRUDE_3_DEPTH)


with BuildPart() as part_9:
    add(part_8.part)


with BuildPart() as part_10:
    # 凸台-拉伸3: joined with extrude_3_tool
    add(part_9.part.fuse(extrude_3_tool.part, tol=0.00001))


with BuildPart() as cut_extrude_6_tool:
    # 草图14 → 切除-拉伸6 (new body)
    with BuildSketch(Plane.XZ.offset(6.375001726).offset(CUT_EXTRUDE_START)):
        with Locations(Location((-0.010790425, -52.148473397, 0), (0, 0, 90))):
            Circle(SKETCH_14_R)
    extrude(amount=CUT_EXTRUDE_6_DEPTH)


with BuildPart() as part_11:
    add(part_10.part)

    # 切除-拉伸6: cut by cut_extrude_6_tool, with a tolerance
    cut_extrude_6_stock = TopTools_ListOfShape()
    cut_extrude_6_stock.Append(part_11.part.wrapped)
    cut_extrude_6_tools = TopTools_ListOfShape()
    cut_extrude_6_tools.Append(cut_extrude_6_tool.part.wrapped)
    cut_extrude_6_cut = BRepAlgoAPI_Cut()
    cut_extrude_6_cut.SetArguments(cut_extrude_6_stock)
    cut_extrude_6_cut.SetTools(cut_extrude_6_tools)
    cut_extrude_6_cut.SetFuzzyValue(0.00001)
    cut_extrude_6_cut.Build()
    add(Compound.cast(cut_extrude_6_cut.Shape()).solids(), mode=Mode.REPLACE)


solid = part_11.part
